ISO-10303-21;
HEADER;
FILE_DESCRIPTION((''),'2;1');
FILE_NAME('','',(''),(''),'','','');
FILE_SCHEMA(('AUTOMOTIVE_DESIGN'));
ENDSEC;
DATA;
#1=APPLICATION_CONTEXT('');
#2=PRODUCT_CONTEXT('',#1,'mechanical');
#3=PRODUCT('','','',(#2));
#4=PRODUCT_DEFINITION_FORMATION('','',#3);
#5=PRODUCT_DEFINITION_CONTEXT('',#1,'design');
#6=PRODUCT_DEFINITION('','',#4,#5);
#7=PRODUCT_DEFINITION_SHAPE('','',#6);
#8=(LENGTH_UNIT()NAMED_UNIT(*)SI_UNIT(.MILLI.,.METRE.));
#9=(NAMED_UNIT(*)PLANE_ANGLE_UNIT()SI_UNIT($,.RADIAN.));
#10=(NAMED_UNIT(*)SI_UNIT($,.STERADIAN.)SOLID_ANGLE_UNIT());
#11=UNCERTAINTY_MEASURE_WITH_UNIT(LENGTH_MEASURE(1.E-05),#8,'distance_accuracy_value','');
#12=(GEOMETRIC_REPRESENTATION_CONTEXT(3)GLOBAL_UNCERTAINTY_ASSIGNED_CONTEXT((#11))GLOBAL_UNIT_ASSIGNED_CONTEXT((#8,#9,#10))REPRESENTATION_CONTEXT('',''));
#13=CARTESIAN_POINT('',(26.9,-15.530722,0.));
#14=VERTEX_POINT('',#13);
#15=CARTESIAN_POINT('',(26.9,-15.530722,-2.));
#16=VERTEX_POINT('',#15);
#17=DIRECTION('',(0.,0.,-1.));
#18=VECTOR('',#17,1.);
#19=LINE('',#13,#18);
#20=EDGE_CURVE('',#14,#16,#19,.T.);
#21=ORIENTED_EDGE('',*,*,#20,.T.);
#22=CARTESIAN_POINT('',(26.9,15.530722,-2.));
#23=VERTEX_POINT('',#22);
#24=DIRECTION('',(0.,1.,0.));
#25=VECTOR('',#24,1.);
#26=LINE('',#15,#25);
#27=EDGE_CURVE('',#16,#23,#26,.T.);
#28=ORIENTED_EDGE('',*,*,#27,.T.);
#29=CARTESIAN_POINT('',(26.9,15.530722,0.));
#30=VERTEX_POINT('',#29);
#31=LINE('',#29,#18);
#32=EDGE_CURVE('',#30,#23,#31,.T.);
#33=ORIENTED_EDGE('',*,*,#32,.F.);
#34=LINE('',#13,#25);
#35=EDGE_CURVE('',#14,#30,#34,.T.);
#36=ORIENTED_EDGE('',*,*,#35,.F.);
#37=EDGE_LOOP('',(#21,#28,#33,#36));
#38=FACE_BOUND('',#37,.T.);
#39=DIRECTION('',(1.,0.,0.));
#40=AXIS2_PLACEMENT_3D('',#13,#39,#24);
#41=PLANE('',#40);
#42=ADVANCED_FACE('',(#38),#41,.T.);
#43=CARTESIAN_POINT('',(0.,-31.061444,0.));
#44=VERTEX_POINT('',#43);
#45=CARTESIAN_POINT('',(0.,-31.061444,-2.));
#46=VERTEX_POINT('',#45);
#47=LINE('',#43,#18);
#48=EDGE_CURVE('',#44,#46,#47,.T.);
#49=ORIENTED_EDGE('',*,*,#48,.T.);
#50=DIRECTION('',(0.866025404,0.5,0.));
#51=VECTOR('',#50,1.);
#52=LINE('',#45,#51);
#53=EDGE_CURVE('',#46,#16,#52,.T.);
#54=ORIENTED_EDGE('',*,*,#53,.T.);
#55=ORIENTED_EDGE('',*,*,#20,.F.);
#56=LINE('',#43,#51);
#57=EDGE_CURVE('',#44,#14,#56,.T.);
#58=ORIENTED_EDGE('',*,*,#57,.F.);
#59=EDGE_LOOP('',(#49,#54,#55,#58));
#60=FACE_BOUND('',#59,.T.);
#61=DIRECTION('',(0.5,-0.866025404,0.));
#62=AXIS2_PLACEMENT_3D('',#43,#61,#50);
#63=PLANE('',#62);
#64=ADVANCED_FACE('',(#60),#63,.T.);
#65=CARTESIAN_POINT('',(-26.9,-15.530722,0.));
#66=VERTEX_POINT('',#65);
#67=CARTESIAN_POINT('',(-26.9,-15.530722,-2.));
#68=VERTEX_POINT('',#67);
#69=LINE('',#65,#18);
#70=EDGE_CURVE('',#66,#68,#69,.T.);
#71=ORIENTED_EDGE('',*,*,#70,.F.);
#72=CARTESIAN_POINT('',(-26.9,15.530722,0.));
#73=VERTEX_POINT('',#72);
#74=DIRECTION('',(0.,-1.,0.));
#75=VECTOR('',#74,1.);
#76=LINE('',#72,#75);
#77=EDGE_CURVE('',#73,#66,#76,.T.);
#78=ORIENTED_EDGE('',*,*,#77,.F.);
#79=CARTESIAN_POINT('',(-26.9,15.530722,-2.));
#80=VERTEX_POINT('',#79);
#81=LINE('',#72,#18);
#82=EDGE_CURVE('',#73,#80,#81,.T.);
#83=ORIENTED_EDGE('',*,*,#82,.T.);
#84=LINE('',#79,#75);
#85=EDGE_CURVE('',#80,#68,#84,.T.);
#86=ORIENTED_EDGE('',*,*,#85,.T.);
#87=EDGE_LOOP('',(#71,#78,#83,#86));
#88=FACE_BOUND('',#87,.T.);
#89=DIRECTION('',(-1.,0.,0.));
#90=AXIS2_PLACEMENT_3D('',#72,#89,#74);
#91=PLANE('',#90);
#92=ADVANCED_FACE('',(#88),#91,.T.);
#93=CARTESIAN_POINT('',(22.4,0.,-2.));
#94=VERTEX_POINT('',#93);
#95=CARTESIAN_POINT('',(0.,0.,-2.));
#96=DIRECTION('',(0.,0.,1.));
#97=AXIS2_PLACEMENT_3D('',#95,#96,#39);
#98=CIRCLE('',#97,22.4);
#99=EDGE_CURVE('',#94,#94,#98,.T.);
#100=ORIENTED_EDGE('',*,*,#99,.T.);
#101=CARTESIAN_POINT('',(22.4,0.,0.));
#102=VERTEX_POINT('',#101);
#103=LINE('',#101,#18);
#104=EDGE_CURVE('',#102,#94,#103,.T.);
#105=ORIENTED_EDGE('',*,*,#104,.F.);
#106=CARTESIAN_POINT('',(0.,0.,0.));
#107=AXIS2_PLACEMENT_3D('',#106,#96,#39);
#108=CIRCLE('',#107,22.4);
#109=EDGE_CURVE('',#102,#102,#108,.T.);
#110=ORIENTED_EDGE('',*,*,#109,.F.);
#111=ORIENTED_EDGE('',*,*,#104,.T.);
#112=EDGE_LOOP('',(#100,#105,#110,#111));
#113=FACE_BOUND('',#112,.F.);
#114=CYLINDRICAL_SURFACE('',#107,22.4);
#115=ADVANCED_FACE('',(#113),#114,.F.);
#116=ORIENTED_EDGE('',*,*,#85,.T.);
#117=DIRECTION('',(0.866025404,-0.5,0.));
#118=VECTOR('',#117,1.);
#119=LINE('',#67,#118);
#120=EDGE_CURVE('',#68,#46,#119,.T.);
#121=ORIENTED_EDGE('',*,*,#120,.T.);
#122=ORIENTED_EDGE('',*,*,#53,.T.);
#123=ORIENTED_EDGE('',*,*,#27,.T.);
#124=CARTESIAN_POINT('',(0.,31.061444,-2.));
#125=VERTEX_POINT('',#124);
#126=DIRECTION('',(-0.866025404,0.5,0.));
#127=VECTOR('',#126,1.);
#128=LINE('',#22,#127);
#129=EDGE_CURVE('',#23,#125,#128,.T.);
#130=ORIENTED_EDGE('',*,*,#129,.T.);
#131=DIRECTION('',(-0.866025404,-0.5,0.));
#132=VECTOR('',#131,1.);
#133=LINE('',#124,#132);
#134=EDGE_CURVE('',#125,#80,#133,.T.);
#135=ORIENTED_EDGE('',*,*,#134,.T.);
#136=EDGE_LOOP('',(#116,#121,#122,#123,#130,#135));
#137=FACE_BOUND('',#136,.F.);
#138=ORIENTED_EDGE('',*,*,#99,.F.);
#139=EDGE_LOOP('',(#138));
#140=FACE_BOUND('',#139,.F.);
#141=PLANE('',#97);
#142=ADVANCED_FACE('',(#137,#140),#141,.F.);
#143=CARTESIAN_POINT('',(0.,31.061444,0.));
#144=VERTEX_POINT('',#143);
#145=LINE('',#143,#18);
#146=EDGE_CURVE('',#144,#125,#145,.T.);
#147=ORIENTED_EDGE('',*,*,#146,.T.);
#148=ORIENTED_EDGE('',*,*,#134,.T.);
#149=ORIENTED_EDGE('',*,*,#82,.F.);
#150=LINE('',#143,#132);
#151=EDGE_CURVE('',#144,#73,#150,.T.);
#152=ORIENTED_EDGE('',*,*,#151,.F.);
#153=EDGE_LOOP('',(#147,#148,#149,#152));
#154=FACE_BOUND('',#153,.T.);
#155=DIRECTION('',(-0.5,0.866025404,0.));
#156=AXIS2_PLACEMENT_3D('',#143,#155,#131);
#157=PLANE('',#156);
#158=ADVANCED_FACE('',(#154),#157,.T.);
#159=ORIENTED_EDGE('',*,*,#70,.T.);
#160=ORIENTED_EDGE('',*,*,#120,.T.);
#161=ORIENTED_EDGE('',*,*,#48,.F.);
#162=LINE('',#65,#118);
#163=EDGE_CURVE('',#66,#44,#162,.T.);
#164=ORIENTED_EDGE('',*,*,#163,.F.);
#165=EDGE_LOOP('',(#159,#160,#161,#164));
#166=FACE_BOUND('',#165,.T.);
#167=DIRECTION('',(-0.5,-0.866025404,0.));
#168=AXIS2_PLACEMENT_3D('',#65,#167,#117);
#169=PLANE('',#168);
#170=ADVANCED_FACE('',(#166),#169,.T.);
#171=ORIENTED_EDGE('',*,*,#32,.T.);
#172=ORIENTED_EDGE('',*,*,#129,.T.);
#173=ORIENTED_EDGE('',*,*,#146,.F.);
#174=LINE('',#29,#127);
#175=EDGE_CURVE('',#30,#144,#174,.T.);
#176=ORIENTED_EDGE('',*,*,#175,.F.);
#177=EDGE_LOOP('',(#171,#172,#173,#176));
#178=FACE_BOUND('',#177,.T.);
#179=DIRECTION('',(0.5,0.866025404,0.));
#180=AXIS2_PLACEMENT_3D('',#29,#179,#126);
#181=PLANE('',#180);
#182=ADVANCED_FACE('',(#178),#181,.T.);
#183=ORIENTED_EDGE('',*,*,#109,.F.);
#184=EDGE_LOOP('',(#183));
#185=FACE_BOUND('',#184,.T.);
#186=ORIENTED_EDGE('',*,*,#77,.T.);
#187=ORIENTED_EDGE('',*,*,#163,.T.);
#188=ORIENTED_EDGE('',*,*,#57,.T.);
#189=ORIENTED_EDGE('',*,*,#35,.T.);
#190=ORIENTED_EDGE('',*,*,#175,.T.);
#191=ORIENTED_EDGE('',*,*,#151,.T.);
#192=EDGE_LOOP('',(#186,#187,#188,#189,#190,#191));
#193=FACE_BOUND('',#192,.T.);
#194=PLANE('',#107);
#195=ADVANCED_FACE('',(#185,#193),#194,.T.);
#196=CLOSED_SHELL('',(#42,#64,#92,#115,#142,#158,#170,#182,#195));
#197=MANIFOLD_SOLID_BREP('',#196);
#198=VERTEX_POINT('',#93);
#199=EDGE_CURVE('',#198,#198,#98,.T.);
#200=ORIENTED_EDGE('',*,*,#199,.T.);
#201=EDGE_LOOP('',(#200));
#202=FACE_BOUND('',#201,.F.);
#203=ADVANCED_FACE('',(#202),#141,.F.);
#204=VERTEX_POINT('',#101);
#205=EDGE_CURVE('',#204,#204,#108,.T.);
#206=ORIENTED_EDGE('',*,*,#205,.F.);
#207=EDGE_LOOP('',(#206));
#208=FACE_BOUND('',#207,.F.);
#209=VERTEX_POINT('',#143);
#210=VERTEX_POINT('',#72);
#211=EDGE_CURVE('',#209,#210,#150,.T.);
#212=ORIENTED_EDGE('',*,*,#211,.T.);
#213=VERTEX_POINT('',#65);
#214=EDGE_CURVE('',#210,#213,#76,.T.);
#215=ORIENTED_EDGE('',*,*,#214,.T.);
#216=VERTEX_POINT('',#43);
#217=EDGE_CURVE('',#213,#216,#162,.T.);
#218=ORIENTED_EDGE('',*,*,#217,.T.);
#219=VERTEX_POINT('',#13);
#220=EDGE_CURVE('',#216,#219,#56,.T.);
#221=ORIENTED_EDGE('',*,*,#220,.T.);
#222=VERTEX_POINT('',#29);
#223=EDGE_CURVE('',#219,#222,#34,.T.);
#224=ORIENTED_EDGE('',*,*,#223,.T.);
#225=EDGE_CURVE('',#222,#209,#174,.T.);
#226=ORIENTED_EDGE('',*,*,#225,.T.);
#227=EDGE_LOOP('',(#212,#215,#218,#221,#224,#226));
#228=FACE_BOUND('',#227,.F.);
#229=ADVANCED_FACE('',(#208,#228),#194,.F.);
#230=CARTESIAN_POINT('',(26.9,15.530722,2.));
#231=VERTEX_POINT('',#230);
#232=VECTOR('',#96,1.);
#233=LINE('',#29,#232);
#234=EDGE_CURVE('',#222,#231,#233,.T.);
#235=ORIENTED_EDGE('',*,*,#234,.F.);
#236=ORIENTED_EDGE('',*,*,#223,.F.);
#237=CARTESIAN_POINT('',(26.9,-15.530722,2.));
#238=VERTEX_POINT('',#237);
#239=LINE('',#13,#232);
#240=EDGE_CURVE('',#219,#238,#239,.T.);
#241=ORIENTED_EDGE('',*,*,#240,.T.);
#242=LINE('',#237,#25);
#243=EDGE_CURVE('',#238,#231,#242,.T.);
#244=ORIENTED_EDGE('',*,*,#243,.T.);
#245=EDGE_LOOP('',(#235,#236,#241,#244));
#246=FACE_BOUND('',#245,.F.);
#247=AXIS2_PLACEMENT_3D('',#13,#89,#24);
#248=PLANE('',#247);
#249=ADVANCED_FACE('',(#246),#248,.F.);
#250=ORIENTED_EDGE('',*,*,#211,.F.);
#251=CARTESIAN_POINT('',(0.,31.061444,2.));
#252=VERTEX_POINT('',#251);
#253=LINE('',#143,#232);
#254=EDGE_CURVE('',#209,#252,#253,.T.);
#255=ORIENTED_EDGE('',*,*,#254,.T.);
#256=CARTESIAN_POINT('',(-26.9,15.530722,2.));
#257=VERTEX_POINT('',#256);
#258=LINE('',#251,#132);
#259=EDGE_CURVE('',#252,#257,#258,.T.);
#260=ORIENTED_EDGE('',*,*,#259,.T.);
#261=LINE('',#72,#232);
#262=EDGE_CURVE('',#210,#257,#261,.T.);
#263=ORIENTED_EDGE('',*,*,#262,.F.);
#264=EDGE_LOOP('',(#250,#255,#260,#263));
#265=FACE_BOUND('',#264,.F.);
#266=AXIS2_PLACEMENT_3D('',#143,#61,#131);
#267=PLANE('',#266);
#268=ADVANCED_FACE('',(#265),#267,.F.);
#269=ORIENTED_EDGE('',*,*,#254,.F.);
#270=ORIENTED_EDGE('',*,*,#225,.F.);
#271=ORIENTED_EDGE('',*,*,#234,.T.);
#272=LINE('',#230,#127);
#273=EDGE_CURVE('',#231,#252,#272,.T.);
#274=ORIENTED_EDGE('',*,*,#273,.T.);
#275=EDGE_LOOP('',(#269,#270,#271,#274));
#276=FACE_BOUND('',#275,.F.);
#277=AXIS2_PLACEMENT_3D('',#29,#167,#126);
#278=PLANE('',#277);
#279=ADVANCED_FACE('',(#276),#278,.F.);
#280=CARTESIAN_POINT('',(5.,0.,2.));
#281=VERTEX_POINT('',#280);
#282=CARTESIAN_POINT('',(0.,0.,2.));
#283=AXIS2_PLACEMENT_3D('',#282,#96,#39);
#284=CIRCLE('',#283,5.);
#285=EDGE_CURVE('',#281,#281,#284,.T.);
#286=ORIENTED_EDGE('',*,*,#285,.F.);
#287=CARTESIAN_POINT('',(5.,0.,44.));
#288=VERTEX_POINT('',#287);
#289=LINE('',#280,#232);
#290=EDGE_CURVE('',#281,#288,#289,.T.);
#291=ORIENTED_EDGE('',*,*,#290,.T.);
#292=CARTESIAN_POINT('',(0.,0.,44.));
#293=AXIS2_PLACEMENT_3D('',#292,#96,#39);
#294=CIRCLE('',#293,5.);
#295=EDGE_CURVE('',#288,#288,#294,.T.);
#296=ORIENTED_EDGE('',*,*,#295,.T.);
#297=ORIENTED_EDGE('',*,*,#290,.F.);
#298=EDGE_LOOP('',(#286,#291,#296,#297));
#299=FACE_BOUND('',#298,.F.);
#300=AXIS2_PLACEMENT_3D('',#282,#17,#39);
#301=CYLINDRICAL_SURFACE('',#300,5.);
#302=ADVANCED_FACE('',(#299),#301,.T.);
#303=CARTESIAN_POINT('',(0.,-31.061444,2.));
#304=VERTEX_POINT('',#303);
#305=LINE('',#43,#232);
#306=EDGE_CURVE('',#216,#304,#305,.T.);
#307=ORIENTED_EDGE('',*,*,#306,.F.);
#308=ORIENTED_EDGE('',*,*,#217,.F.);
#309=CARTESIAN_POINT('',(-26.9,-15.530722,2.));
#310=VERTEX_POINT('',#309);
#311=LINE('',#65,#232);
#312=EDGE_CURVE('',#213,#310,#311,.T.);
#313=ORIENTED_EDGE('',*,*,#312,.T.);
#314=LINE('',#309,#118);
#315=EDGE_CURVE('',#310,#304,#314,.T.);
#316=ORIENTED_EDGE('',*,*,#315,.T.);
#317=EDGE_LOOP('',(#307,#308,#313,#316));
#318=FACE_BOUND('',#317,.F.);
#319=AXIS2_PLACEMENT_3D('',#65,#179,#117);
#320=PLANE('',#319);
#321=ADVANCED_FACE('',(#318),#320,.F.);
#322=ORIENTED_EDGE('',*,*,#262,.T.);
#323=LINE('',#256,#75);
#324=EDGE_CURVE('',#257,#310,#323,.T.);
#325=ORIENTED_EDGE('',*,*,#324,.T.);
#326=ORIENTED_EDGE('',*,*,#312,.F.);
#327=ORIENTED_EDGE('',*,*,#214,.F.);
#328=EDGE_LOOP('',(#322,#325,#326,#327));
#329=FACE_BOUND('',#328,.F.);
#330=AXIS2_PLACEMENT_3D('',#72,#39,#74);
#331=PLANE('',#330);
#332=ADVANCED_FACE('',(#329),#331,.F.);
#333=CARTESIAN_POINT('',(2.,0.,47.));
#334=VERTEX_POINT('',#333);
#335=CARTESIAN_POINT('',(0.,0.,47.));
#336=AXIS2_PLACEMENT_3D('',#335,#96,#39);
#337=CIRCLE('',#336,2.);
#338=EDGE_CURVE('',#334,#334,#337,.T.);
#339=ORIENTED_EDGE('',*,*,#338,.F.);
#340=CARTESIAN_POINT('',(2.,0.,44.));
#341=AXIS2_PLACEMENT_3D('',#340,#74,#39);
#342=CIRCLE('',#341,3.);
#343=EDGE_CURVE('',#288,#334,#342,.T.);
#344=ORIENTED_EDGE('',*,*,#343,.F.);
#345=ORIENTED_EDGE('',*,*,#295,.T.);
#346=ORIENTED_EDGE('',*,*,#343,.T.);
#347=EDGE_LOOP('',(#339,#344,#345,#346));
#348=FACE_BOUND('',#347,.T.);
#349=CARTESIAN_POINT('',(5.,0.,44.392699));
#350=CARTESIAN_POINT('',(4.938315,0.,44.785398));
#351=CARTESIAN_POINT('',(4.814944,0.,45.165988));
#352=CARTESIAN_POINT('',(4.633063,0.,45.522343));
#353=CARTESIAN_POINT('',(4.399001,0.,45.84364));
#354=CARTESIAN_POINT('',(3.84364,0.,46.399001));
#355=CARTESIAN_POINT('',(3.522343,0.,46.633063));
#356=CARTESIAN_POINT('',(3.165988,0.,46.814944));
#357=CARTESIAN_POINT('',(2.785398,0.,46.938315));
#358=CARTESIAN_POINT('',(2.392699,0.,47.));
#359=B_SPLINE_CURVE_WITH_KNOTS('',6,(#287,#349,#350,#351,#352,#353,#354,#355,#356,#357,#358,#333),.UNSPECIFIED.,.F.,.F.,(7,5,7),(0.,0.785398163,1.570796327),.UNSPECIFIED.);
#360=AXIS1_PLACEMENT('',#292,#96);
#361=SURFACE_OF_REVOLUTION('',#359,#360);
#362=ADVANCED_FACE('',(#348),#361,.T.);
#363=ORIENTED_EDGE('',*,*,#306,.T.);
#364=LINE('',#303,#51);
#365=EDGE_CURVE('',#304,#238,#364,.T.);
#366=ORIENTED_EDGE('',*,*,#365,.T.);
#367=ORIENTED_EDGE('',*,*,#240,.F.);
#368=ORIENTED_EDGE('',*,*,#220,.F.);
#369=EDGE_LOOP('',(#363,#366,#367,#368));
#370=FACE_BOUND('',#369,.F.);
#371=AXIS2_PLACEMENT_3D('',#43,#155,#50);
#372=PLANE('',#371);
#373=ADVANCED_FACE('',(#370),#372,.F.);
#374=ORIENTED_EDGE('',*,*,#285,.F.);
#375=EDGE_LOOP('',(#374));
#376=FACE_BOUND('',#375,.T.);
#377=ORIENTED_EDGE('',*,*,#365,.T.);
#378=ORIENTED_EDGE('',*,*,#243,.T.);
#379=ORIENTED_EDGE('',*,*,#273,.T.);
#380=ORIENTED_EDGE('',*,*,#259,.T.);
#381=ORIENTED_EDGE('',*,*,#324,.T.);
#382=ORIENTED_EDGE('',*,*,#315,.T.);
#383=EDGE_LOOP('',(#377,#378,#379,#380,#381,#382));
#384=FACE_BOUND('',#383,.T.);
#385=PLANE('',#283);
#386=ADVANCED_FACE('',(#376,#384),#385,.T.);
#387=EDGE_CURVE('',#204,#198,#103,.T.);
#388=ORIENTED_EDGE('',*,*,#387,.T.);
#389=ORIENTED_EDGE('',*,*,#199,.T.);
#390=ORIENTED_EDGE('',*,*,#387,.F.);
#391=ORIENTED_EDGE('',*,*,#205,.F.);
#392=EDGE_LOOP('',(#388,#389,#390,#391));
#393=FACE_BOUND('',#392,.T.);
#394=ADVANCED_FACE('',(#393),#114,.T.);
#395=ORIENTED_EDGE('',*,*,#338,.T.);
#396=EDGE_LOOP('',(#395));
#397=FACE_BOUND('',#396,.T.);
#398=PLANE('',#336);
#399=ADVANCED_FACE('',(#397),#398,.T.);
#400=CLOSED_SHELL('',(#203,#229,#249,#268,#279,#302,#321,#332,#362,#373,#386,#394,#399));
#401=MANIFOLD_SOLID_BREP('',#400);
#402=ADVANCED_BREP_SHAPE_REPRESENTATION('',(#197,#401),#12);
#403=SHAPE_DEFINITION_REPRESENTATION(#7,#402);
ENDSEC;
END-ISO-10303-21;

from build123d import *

# Parameters (mm, degrees)
F0_R     = 22.4
F1_DEPTH = 2
F2_R     = 5
F3_DEPTH = 45
F4_R     = 3
F5_DEPTH = 2
F6_DEPTH = 2


# Not quite as in the source:
# - a feature names something its author has since deleted; it is built from what else it names


with BuildPart() as f1:
    # F0 (on Top) → F1 (new body)
    with BuildSketch(Plane.XY):
        Polygon((26.9, -15.5307222412), (26.9, 15.5307222412), (0, 31.0614444824), (-26.9, 15.5307222412), (-26.9, -15.5307222412), (0, -31.0614444824), align=None)
        Circle(F0_R, mode=Mode.SUBTRACT)
        Circle(F0_R)
    extrude(amount=F1_DEPTH)

    # F2 (on face) → F3 (join)
    with BuildSketch(Plane.XY.offset(2)):
        Circle(F2_R)
    extrude(amount=F3_DEPTH)

    # F4
    f4_edges = [f1.edges().sort_by_distance(p)[0] for p in [
        (-5, 0, 47),
    ]]
    fillet(f4_edges, radius=F4_R)

    # F0 (on Top) → F5 (join)
    with BuildSketch(Plane.XY):
        Circle(F0_R)
    extrude(amount=-F5_DEPTH)


with BuildPart() as f6:
    # F0 (on Top) → F6 (new body)
    with BuildSketch(Plane.XY):
        Polygon((26.9, -15.5307222412), (26.9, 15.5307222412), (0, 31.0614444824), (-26.9, 15.5307222412), (-26.9, -15.5307222412), (0, -31.0614444824), align=None)
        Circle(F0_R, mode=Mode.SUBTRACT)
    extrude(amount=-F6_DEPTH)


solid = Compound([f1.part, f6.part])
